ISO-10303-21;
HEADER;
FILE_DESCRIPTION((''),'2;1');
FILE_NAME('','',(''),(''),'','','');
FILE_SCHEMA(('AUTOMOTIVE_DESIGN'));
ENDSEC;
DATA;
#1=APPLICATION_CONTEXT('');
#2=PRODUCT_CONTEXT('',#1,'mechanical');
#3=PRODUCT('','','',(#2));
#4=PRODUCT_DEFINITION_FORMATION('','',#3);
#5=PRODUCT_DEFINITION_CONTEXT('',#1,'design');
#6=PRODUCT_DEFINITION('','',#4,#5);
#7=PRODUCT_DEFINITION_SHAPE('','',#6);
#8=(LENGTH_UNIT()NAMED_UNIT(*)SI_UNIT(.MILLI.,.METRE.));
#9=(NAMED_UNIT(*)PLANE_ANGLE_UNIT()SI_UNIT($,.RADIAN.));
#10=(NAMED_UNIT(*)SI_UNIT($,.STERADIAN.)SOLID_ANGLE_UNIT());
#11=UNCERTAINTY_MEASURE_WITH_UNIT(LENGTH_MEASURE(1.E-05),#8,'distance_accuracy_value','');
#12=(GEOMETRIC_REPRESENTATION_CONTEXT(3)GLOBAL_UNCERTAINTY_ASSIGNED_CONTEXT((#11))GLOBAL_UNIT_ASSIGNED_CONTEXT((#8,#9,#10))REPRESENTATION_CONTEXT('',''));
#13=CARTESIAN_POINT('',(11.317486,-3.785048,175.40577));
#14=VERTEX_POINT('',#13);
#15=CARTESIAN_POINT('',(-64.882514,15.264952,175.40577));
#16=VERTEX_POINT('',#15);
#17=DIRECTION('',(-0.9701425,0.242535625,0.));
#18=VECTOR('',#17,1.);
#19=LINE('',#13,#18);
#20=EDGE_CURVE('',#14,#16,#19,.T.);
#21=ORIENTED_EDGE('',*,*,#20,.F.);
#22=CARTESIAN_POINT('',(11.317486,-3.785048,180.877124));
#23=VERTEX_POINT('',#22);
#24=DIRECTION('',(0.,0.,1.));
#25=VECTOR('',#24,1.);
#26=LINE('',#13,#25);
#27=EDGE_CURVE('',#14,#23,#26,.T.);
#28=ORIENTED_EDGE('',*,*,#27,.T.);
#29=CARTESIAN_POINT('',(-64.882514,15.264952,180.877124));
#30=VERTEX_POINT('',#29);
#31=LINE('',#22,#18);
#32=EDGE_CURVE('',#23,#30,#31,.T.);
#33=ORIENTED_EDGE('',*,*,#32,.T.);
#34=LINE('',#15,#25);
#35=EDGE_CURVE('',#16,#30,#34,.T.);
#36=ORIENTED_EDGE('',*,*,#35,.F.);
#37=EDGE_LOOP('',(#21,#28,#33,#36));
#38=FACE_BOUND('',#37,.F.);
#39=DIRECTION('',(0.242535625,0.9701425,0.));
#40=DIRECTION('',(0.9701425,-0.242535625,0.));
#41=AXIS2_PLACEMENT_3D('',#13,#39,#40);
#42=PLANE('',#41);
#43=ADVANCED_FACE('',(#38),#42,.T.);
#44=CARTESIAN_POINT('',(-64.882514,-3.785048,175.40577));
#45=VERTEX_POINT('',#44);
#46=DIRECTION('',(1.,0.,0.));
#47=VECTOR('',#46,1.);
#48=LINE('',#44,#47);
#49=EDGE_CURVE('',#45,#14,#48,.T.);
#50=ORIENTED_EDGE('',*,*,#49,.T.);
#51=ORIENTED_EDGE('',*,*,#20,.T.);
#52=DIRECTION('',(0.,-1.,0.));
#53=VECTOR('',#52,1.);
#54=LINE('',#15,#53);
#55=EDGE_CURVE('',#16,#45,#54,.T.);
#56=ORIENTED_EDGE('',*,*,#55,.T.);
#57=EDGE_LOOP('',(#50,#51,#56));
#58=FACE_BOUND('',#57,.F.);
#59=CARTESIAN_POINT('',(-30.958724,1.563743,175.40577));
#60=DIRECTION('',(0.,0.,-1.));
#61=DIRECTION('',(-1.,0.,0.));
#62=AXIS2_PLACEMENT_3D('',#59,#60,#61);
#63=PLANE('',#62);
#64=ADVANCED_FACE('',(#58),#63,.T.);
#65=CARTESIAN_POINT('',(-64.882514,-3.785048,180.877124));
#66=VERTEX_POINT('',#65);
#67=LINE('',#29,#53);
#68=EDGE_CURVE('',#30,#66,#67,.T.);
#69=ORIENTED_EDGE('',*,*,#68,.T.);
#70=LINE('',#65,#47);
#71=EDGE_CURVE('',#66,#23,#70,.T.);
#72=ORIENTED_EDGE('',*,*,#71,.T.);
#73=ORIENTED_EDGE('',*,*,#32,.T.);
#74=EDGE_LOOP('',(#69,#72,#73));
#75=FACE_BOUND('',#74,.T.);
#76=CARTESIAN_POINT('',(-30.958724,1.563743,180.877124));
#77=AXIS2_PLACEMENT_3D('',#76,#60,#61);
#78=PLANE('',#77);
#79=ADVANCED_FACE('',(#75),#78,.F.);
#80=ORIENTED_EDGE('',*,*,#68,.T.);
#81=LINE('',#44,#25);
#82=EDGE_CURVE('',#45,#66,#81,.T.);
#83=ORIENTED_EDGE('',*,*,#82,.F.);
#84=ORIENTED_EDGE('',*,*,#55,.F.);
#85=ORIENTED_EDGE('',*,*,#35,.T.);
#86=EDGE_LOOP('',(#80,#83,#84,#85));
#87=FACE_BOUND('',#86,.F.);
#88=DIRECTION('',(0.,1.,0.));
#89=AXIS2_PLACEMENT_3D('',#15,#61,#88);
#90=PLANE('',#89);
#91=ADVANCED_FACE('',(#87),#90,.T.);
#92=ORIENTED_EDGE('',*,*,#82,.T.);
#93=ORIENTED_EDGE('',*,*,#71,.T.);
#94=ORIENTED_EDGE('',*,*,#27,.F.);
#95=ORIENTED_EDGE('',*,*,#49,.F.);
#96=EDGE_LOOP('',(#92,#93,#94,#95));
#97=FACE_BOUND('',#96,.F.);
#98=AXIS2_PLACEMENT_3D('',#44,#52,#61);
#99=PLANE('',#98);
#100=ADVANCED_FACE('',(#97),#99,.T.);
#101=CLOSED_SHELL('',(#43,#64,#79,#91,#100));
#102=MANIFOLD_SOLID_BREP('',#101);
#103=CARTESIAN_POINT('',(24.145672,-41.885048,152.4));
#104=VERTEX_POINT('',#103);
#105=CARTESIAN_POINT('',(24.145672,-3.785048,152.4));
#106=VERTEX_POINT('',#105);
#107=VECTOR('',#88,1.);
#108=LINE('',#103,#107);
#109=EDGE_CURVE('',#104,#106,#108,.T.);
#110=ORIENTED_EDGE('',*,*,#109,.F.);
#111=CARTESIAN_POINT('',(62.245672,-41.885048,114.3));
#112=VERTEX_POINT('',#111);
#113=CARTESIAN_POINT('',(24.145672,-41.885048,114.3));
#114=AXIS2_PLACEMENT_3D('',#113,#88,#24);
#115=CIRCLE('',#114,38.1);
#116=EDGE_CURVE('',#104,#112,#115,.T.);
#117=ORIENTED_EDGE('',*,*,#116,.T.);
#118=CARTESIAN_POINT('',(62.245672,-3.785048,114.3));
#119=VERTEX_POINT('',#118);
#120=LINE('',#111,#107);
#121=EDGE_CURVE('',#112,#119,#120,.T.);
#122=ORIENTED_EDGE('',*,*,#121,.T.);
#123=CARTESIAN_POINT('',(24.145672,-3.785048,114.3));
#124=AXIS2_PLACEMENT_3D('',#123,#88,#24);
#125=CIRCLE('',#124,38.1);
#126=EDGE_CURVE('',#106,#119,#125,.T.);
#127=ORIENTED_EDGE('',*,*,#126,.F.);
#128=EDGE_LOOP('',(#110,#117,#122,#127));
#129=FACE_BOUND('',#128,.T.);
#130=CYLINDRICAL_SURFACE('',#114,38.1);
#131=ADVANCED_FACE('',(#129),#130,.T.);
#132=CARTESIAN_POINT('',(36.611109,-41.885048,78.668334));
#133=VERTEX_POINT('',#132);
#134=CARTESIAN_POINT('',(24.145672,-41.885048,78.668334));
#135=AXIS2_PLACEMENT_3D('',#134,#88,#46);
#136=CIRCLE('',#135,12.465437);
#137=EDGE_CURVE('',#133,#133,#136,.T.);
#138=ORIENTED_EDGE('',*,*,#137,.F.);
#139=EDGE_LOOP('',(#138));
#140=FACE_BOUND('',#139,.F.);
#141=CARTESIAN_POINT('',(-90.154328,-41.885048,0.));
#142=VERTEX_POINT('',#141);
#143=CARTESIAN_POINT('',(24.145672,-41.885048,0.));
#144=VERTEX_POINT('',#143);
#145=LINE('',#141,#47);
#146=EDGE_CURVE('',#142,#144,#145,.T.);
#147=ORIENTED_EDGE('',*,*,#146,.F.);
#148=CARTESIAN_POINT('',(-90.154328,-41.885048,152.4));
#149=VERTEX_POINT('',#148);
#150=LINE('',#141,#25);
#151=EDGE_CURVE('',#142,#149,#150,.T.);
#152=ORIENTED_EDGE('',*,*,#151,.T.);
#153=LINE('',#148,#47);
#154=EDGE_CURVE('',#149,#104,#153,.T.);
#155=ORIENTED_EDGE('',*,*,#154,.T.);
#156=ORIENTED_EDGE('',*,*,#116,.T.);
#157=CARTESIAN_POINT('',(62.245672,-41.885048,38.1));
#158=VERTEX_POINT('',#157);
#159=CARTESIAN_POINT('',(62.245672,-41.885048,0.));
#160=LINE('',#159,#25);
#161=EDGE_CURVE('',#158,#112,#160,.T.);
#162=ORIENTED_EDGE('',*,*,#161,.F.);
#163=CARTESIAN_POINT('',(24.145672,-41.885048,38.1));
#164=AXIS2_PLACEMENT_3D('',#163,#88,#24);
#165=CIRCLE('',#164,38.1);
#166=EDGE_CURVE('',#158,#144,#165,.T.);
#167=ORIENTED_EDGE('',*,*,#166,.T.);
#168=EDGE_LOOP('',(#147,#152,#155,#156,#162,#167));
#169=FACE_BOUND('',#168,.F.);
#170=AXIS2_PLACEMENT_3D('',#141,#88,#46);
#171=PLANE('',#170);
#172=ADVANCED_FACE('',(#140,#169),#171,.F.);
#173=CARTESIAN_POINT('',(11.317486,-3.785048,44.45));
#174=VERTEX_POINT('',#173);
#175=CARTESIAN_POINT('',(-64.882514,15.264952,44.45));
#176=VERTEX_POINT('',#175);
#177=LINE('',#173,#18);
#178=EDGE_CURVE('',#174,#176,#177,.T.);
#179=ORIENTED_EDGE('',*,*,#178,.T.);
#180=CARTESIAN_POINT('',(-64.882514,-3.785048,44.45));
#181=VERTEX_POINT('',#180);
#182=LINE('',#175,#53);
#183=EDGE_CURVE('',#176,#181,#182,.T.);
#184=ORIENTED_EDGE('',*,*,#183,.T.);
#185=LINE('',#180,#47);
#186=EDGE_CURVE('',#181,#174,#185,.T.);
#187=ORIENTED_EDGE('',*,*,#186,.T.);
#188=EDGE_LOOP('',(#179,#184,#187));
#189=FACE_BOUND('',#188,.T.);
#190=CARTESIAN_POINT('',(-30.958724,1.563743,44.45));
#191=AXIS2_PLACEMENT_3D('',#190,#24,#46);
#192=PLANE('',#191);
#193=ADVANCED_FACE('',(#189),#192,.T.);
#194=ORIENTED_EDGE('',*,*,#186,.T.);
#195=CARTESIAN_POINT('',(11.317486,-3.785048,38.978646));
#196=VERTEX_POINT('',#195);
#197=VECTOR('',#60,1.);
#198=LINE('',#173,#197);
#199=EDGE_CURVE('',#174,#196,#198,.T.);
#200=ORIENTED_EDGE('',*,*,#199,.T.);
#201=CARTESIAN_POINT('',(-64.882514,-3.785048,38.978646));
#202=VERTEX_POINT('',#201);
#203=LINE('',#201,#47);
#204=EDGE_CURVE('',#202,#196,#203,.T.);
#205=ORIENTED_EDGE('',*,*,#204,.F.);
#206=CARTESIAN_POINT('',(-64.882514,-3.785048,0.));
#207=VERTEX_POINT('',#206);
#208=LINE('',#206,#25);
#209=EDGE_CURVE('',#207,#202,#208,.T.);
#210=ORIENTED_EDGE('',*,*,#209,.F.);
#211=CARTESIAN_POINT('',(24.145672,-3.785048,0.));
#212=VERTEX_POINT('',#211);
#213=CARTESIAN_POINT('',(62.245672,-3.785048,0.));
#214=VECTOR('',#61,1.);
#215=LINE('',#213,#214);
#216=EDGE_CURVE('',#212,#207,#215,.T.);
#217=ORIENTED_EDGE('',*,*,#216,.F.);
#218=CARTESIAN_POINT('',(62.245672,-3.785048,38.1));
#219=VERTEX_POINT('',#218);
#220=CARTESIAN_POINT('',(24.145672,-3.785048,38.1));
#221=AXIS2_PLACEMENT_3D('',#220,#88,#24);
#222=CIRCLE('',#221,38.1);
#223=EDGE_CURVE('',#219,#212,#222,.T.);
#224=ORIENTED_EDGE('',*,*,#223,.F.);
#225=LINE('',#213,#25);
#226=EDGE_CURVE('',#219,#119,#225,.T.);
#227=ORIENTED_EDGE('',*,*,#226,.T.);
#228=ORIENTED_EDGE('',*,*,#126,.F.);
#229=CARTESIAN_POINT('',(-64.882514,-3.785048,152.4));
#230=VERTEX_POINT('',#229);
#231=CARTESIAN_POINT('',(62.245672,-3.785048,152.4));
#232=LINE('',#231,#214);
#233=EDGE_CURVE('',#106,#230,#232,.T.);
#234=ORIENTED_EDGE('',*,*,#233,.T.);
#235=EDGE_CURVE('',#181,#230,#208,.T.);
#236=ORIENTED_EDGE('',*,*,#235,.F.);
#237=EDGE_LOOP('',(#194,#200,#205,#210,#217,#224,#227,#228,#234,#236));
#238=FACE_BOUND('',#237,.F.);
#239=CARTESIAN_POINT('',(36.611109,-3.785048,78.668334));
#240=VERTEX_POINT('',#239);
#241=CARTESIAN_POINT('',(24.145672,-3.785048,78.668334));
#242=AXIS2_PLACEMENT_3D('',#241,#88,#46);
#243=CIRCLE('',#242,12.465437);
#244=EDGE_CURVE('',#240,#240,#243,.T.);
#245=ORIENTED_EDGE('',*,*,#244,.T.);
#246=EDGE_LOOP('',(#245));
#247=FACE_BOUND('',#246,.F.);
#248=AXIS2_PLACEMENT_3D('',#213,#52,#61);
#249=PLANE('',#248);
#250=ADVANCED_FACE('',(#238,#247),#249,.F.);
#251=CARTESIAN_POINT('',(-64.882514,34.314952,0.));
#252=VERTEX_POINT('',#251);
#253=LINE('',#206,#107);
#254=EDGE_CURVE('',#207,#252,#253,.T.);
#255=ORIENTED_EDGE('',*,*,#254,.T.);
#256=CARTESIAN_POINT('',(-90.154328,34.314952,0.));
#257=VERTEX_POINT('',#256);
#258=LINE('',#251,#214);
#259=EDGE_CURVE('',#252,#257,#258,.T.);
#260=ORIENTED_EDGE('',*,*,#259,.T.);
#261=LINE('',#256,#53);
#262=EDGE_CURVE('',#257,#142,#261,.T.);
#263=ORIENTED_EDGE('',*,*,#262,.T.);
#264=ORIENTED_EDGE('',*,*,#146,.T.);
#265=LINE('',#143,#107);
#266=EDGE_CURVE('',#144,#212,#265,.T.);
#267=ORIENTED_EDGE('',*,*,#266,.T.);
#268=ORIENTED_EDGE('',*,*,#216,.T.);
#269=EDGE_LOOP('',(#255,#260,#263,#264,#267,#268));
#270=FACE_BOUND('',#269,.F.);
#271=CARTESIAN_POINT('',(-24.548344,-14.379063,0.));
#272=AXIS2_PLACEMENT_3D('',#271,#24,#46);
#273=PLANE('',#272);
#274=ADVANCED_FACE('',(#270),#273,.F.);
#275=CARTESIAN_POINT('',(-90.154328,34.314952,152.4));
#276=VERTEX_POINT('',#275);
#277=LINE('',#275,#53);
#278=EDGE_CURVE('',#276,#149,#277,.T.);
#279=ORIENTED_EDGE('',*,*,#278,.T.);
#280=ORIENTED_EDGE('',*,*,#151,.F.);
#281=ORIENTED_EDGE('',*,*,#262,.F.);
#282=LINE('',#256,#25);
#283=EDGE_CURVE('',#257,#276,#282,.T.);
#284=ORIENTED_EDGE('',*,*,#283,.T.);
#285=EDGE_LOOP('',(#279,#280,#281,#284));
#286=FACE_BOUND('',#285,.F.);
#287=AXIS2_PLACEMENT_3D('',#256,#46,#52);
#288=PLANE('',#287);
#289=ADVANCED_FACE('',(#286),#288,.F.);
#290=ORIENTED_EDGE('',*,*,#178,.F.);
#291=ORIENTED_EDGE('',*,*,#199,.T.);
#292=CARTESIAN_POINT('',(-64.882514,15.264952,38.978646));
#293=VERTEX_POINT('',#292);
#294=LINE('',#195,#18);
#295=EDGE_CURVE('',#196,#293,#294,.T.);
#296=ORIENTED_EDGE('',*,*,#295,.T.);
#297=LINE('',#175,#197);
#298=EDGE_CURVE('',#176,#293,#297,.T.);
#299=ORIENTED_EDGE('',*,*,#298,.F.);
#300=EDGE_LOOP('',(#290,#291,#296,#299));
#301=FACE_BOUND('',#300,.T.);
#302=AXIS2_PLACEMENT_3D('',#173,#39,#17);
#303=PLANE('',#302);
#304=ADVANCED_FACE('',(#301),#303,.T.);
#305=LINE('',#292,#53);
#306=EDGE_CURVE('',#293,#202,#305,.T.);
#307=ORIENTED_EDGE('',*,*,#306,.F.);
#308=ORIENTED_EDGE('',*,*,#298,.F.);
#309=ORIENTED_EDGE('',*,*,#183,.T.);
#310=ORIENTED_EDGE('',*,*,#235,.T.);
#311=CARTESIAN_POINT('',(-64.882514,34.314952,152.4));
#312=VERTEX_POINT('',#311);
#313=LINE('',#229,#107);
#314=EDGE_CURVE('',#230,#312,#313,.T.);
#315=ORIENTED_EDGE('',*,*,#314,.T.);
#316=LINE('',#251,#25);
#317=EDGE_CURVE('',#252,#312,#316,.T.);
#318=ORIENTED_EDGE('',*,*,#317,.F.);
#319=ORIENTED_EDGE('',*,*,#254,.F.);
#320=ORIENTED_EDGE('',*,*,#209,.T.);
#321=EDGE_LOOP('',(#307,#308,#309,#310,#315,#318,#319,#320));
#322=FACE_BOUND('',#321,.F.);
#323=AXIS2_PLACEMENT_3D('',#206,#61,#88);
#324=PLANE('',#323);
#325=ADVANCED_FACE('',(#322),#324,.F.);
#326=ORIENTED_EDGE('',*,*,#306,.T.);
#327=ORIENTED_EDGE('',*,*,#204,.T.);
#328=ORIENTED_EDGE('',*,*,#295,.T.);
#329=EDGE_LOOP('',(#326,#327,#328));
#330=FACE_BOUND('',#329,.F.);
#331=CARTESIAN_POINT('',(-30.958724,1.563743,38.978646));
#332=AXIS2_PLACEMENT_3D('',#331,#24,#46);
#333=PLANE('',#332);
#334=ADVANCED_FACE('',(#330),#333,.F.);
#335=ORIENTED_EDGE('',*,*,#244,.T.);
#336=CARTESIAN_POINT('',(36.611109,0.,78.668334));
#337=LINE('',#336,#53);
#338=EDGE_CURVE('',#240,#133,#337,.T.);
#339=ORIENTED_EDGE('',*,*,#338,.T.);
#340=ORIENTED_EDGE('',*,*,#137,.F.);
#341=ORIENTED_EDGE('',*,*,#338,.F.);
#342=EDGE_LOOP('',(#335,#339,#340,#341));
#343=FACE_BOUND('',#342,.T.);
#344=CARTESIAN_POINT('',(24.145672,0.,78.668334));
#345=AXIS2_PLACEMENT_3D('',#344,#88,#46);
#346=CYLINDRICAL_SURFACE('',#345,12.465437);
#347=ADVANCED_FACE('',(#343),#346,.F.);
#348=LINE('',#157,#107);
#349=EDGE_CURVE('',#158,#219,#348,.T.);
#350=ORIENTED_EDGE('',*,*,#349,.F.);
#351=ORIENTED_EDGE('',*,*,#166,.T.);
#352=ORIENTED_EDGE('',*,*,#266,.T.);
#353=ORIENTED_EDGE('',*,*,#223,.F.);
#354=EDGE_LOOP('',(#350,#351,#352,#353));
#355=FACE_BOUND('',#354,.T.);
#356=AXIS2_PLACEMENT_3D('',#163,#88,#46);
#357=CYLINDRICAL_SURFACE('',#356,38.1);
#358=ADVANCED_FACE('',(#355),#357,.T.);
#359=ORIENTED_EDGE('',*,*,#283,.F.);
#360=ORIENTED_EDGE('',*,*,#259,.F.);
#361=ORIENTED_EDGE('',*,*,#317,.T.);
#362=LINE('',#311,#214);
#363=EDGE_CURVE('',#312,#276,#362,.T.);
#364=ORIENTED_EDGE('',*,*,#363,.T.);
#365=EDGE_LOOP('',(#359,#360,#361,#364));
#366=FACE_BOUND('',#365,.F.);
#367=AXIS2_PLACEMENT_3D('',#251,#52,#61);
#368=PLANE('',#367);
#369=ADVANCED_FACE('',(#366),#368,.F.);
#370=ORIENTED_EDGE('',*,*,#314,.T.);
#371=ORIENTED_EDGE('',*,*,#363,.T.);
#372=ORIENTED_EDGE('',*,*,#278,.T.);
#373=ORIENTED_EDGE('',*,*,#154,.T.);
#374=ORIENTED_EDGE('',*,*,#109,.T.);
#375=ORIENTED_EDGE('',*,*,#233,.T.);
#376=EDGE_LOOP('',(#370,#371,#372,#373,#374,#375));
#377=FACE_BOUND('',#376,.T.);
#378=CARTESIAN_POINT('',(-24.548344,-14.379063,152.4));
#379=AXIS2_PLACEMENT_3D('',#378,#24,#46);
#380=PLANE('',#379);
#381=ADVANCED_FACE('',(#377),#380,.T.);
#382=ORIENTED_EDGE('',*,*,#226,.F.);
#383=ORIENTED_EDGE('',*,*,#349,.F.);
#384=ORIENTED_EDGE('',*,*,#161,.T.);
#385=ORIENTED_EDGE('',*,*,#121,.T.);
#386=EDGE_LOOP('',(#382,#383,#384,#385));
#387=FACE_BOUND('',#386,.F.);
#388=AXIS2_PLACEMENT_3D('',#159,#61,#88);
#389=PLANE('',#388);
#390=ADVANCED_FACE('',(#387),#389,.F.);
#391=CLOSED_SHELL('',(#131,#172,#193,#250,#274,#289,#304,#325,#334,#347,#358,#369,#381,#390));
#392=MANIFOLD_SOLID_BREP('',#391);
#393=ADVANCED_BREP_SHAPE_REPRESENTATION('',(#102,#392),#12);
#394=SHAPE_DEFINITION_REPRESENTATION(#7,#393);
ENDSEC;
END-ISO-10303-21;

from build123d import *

# Parameters (mm, degrees)
F1_DEPTH = 152.4
F2_R     = 12.4654374507
F3_DEPTH = 41.8860476801
F4_R     = 38.1
F5_R     = 38.1
F8_DEPTH = 5.4713543504


# Not quite as in the source:
# - a pattern or mirror of a feature is missing from the dataset's text; its kind, count and spacing are read off the source's solid


with BuildPart() as f1:
    # F0 (on Top) → F1 (new body)
    with BuildSketch(Plane.XY):
        Polygon((-64.8825142378, 34.3149523199), (-90.1543280485, 34.3149523199), (-90.1543280485, -41.8850476801), (62.2456719515, -41.8850476801), (62.2456719515, -3.7850476801), (-64.8825142378, -3.7850476801), align=None)
    extrude(amount=F1_DEPTH)

    # F2 (on Front) → F3 (cut, through all)
    with BuildSketch(Plane.XZ):
        with Locations((24.1456719515, 78.66833359)):
            Circle(F2_R)
    extrude(amount=F3_DEPTH, mode=Mode.SUBTRACT)

    # F4
    f4_edges = [f1.edges().sort_by_distance(p)[0] for p in [
        (62.245672, -22.835048, 152.4),
    ]]
    fillet(f4_edges, radius=F4_R)

    # F5
    f5_edges = [f1.edges().sort_by_distance(p)[0] for p in [
        (62.245672, -22.835048, 0),
    ]]
    fillet(f5_edges, radius=F5_R)

    # F7 (on offset) → F8 (join)
    with BuildSketch(Plane.XY.offset(44.45)):
        Polygon((-64.8825142378, -3.7850476801), (11.3174857622, -3.7850476801), (-64.8825142378, 15.2649523199), align=None)
    f8 = extrude(amount=-F8_DEPTH)

    # F8_copies: F8 across plane
    add(f8.mirror(Plane.XY.offset(109.927885)))


solid = f1.part
